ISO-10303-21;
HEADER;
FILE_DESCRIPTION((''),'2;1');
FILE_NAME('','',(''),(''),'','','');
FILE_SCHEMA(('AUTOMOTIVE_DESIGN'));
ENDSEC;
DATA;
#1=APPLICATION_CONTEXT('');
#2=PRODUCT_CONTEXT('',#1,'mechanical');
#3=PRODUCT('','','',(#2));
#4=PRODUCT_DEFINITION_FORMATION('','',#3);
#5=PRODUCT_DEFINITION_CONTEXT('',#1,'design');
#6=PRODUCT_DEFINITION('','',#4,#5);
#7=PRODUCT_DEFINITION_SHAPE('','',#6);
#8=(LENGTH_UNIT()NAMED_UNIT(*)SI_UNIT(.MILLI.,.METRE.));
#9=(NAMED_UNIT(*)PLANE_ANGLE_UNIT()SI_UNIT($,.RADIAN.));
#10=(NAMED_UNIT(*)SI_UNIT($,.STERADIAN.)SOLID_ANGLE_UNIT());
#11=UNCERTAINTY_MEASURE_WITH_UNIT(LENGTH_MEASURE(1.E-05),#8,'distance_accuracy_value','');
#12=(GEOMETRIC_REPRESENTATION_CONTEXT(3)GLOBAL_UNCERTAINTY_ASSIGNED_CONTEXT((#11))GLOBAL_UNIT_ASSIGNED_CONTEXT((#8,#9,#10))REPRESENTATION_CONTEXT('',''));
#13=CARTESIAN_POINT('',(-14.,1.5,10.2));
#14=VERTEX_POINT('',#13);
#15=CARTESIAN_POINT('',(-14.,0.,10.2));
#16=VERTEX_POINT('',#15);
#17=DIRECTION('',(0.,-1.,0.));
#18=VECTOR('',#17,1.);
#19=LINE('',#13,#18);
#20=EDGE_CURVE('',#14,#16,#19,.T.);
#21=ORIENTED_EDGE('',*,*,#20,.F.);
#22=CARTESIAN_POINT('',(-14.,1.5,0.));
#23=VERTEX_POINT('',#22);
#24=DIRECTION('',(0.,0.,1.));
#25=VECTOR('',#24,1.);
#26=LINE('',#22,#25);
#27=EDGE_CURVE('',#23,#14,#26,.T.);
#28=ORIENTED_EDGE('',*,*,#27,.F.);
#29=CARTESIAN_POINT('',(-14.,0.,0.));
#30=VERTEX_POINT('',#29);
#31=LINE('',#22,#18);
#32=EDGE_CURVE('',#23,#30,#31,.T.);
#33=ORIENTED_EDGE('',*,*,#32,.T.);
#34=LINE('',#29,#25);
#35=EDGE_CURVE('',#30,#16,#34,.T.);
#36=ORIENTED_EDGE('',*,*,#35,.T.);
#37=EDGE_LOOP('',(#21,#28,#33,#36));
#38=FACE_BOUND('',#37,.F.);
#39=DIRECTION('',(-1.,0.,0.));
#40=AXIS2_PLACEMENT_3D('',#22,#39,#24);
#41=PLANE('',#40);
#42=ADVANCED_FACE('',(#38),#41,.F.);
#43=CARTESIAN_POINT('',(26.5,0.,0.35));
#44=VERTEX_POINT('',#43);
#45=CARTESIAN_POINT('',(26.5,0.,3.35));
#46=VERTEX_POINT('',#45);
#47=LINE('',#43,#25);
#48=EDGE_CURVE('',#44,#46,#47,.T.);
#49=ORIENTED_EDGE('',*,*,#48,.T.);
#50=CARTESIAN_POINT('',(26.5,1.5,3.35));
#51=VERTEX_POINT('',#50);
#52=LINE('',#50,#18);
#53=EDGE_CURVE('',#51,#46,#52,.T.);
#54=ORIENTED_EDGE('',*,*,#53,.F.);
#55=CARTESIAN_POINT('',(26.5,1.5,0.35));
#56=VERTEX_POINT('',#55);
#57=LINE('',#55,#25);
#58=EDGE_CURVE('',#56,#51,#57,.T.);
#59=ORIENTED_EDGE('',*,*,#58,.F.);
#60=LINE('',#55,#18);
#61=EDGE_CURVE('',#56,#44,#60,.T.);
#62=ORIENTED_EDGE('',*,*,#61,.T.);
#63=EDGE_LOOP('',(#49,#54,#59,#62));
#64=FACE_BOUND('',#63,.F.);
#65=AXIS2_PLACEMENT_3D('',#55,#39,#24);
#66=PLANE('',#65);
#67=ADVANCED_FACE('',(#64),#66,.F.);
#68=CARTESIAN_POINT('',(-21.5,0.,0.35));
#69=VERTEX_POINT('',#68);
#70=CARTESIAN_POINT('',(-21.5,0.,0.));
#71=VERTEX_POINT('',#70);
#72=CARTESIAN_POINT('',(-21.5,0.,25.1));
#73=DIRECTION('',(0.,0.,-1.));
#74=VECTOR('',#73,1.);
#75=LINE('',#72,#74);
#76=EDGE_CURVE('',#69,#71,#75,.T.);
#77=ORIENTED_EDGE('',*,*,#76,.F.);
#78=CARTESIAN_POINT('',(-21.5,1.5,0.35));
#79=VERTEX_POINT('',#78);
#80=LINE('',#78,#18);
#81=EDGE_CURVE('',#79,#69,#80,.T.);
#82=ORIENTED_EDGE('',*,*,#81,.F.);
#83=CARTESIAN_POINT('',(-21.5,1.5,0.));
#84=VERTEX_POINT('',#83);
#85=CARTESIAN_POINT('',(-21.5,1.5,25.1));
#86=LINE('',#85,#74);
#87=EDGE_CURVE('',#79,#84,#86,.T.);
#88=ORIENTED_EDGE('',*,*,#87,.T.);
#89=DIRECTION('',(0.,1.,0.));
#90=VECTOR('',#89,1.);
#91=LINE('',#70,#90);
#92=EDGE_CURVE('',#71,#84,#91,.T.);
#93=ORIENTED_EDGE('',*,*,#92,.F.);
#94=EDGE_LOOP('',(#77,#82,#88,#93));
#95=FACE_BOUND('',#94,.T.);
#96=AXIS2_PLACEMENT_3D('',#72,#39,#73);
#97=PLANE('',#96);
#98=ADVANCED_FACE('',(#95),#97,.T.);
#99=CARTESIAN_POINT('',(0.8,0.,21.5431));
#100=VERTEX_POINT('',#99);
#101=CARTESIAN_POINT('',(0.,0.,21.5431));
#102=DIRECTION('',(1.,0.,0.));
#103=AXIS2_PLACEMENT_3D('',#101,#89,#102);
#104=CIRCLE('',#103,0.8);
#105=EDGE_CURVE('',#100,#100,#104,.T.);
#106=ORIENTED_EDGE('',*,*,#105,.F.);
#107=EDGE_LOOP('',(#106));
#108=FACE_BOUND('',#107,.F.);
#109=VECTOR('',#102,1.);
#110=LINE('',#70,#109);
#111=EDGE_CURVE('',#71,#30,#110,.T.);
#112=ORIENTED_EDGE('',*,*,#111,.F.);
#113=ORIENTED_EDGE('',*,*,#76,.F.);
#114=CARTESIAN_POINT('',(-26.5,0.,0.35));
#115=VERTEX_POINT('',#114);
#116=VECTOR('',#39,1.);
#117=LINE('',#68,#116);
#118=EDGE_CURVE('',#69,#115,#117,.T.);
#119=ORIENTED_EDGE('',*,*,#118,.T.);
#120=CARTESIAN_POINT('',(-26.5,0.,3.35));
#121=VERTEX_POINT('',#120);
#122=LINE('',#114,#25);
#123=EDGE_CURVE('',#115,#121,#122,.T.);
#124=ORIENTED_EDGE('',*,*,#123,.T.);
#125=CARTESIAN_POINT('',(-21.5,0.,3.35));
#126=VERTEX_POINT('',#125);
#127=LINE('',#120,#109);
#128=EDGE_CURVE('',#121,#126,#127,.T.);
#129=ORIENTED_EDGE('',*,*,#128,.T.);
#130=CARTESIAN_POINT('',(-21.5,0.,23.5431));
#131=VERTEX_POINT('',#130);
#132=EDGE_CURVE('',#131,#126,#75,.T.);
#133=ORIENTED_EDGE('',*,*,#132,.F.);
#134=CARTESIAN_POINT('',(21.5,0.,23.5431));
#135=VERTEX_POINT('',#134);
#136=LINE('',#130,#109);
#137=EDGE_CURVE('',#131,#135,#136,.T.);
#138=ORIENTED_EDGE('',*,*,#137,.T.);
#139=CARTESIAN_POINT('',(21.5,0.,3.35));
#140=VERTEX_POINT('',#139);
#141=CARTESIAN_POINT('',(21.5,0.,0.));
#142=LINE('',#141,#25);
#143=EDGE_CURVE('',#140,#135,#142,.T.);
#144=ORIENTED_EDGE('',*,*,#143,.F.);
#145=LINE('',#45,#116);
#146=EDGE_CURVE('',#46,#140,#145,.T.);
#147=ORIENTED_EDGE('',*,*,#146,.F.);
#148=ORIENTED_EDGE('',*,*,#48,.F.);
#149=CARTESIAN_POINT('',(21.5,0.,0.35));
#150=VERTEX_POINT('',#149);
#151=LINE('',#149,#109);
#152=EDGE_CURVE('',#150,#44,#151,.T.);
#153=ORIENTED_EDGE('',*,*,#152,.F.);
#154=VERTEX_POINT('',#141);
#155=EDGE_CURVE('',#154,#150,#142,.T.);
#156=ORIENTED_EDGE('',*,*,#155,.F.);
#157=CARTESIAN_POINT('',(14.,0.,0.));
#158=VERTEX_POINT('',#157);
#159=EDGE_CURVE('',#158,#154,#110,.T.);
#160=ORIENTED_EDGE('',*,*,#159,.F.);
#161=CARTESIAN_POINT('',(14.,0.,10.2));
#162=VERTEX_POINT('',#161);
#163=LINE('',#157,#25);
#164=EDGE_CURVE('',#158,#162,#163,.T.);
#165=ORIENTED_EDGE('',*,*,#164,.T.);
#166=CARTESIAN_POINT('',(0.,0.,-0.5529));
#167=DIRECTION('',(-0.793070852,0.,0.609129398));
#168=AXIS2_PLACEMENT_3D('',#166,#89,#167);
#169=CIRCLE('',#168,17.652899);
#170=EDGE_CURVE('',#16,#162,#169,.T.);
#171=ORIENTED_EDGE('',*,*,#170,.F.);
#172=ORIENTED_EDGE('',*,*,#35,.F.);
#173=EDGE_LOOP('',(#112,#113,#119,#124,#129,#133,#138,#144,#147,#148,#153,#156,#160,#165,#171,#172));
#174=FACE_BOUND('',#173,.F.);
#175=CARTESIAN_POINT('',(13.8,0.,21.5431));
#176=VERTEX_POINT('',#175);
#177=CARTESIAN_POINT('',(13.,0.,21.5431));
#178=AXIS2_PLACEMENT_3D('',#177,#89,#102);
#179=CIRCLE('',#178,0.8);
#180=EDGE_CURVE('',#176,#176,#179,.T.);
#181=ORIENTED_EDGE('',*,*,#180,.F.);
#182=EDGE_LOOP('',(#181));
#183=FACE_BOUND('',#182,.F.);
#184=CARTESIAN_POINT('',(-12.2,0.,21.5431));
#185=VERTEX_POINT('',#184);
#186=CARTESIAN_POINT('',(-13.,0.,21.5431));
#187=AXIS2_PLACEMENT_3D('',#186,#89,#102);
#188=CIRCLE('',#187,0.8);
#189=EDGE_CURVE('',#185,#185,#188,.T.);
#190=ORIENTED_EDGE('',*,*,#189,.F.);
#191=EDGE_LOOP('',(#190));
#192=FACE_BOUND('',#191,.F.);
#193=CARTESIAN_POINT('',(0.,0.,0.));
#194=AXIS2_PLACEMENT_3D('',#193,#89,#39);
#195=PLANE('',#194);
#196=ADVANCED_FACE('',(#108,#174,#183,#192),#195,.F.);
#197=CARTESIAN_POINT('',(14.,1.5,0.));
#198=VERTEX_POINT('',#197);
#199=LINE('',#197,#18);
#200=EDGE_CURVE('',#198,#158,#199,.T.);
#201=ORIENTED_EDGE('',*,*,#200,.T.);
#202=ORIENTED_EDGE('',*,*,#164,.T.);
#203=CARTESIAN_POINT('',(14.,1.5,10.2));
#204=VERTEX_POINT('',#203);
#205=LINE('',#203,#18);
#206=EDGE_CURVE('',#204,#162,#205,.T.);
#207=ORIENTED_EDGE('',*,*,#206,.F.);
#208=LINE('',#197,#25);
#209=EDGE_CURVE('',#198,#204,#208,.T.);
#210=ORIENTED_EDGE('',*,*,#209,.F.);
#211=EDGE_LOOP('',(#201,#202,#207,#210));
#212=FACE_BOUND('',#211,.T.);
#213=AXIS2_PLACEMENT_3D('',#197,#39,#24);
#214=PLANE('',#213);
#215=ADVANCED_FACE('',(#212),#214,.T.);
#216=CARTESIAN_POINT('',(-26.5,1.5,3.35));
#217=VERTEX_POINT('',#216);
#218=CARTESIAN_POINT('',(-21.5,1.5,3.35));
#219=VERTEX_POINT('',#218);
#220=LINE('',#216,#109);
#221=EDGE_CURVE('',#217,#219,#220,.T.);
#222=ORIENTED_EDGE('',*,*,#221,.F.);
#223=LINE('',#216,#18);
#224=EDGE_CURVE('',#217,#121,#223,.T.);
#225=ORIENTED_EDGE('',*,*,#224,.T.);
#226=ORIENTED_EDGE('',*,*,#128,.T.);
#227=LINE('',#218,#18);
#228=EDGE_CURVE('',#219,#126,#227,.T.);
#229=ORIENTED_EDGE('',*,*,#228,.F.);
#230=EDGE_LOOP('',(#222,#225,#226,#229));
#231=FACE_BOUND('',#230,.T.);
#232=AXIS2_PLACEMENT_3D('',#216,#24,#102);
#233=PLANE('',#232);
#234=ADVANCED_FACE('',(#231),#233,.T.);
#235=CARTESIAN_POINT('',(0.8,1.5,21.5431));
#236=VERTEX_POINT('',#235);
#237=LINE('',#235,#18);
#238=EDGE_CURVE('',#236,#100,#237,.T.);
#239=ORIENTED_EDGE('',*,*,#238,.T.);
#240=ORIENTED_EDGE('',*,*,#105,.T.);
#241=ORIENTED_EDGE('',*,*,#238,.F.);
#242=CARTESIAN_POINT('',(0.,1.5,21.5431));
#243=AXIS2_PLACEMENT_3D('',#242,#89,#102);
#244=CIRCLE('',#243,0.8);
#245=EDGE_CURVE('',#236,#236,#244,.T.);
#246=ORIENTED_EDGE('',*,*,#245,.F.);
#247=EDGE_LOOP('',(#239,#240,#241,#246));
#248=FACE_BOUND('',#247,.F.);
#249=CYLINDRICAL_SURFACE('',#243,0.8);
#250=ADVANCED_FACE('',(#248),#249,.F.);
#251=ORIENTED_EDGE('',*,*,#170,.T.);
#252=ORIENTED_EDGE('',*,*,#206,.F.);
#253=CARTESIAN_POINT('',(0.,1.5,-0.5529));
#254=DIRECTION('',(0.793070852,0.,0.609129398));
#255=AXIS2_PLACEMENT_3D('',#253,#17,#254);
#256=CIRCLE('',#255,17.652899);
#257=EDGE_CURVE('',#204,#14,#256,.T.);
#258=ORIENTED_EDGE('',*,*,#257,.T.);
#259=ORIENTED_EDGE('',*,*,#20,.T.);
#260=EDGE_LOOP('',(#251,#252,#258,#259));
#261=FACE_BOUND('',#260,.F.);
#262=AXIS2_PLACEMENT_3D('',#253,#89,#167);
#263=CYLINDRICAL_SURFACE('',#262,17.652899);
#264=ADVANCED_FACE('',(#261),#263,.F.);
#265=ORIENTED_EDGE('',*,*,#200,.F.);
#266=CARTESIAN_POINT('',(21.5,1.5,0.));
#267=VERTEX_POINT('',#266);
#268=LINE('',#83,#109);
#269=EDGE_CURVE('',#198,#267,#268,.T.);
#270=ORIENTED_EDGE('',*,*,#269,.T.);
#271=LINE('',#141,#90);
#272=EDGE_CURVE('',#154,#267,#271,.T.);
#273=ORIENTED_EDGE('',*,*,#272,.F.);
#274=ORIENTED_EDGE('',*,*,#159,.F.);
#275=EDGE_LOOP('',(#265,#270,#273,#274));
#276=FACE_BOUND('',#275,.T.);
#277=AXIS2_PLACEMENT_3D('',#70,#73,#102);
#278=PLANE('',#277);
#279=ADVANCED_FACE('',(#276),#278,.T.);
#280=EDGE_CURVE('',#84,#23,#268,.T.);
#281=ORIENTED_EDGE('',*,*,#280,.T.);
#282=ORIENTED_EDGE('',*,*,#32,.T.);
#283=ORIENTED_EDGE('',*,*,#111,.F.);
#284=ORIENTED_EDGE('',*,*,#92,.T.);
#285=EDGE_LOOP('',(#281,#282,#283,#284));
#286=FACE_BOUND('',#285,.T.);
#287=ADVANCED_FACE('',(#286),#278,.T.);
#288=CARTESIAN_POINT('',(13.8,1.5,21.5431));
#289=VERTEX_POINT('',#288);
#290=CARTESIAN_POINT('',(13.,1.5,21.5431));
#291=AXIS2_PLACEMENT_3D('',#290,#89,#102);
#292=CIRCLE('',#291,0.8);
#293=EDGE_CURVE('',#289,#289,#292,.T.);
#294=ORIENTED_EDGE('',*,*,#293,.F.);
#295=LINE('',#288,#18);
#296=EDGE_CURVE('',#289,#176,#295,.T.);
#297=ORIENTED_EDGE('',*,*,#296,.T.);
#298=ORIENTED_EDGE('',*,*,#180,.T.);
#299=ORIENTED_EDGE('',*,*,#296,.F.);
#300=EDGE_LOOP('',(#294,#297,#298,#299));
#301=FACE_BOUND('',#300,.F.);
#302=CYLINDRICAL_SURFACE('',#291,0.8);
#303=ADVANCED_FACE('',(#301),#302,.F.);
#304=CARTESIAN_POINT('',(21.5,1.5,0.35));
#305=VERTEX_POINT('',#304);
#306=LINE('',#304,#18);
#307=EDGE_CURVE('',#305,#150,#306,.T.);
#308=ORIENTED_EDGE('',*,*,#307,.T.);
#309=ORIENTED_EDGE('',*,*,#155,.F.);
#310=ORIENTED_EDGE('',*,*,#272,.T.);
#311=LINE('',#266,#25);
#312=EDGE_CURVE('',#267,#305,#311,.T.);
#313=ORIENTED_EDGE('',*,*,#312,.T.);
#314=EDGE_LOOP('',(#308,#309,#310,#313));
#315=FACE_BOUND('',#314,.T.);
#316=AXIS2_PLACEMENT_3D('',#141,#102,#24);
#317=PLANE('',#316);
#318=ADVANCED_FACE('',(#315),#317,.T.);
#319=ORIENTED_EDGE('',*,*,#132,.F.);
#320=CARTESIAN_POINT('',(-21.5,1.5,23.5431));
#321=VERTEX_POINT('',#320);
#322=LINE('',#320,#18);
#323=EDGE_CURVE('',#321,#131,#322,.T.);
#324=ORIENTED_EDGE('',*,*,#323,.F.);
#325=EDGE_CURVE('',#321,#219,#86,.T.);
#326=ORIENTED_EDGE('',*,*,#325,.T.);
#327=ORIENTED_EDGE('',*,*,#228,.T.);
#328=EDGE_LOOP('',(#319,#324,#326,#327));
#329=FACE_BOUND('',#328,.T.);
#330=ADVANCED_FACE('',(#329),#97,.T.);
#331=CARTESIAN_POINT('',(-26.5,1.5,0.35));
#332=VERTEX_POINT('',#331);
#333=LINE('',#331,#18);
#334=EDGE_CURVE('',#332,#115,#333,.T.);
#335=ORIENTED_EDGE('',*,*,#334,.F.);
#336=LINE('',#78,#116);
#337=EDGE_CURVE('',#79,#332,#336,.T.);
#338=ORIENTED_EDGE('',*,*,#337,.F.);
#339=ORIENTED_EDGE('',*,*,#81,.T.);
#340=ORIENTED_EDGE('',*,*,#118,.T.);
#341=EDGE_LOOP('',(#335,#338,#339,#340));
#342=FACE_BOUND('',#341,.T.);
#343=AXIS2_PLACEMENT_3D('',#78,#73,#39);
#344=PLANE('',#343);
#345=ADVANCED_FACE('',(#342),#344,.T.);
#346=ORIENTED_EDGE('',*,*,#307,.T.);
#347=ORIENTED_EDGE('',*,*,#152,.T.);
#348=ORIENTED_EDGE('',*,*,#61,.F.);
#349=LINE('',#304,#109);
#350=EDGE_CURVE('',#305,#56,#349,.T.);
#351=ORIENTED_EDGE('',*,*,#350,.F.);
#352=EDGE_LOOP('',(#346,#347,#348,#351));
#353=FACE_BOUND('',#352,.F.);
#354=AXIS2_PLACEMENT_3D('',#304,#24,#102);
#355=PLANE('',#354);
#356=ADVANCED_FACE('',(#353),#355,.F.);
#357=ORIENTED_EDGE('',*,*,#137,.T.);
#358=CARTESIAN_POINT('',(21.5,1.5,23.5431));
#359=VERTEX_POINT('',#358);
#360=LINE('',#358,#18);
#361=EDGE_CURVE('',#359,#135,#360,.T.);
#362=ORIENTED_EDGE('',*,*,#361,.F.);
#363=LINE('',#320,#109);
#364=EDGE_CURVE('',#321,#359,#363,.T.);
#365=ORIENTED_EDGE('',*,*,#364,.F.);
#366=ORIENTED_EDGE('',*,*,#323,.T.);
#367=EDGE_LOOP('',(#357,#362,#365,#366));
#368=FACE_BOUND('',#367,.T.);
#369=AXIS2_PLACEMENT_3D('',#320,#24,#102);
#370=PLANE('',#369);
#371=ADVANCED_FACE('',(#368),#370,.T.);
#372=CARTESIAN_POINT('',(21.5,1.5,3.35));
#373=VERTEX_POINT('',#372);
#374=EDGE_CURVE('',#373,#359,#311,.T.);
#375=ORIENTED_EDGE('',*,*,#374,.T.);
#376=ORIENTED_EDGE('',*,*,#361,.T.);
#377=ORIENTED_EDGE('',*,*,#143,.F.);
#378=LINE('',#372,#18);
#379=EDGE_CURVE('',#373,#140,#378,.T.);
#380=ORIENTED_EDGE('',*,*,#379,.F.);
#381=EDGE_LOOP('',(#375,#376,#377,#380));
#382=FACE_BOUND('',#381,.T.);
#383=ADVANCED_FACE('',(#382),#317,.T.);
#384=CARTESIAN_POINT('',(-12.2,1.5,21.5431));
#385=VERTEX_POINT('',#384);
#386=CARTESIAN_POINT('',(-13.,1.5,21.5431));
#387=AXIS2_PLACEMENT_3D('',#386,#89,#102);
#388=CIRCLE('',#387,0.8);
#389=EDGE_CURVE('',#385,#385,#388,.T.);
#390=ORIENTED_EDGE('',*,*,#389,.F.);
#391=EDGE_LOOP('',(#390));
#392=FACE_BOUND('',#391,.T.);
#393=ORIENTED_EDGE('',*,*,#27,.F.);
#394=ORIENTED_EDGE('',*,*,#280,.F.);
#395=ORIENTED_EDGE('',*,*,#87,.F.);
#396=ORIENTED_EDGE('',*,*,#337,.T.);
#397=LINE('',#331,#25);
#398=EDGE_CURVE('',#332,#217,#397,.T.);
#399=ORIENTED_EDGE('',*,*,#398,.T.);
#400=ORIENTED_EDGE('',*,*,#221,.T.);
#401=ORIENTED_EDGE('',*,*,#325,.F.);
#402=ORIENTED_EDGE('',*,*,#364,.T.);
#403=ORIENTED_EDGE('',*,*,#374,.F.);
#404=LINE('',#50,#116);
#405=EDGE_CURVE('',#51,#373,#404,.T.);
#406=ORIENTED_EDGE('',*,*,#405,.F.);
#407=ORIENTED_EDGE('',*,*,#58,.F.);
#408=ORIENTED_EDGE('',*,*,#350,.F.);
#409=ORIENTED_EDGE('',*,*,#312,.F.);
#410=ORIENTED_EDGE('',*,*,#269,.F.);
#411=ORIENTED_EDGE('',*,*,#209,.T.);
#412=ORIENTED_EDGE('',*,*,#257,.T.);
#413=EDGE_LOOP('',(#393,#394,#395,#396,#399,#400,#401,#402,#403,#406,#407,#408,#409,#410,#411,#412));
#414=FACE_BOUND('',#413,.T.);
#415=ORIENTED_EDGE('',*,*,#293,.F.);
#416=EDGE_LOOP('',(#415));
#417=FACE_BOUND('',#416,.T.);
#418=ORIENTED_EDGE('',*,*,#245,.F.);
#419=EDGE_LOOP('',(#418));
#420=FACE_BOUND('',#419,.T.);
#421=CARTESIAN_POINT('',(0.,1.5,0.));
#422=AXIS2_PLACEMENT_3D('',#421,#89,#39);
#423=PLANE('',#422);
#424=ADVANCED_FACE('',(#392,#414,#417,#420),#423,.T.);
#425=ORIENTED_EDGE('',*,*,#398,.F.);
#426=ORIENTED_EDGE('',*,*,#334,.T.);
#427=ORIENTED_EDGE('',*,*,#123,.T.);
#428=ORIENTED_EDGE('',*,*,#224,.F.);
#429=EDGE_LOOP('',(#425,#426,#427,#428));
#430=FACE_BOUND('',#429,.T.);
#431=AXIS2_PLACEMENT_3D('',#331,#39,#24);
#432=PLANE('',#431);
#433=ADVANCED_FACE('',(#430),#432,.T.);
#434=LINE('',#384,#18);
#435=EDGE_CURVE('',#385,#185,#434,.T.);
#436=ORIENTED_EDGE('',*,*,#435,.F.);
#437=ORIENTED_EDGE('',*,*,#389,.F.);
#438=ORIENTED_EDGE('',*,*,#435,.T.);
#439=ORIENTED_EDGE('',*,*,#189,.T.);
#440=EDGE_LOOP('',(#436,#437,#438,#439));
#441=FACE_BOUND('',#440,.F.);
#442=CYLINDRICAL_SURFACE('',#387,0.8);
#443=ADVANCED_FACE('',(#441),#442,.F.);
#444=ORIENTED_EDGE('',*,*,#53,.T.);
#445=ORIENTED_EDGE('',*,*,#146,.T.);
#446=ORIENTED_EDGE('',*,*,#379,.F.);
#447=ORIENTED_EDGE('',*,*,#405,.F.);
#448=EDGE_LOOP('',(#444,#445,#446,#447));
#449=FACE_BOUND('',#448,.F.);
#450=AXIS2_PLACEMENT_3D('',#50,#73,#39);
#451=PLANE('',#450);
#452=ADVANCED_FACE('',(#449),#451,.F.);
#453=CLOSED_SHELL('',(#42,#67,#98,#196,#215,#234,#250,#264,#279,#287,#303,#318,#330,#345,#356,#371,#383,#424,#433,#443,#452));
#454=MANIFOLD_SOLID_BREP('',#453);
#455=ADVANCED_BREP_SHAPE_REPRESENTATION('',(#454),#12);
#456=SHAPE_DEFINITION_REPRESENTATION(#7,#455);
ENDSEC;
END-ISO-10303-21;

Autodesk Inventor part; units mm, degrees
ref_plane "YZ Plane" through (0, 0, 0) normal (1, 0, 0) x (0, 1, 0)
ref_plane "XZ Plane" through (0, 0, 0) normal (0, 1, 0) x (-1, 0, 0)
ref_plane "XY Plane" through (0, 0, 0) normal (0, 0, 1) x (1, 0, 0)
sketch "スケッチ8" plane through (0, 1.5, 0) normal (0, 1, 0) x (1, 0, 0)
  line L0 (-21.5, -23.5431) -> (-21.5, 0)
  line L1 (-21.5, -0.35) -> (-26.5, -0.35)
  line L2 (-26.5, -0.35) -> (-26.5, -3.35)
  line L3 (-26.5, -3.35) -> (-21.5, -3.35)
  line L4 (-21.5, -3.35) -> (-21.5, -0.35)
  line L5 (21.5, 0) -> (21.5, -23.5431)
  line L6 (21.5, -0.35) -> (26.5, -0.35)
  line L7 (26.5, -0.35) -> (26.5, -3.35)
  line L8 (26.5, -3.35) -> (21.5, -3.35)
  line L9 (21.5, -3.35) -> (21.5, -0.35)
  line L10 (-21.5, 0) -> (-14, 0)
  point P0 (0, 0)
  point P1 (-26.5, -1.85)
  dimension "d28" = 5
  dimension "d29" = 3
  dimension "d30" = 1.85
sketch "スケッチ1" plane through (0, 0, 0) normal (0, 1, 0) x (-1, 0, 0)
  line L0 (21.5, 0) -> (-21.5, 0)
  line L1 (-21.5, 0) -> (-21.5, 25.1)
  line L2 (-21.5, 25.1) -> (21.5, 25.1)
  line L3 (21.5, 25.1) -> (21.5, 0)
  point P0 (0, 0)
  point P1 (0, 0)
  dimension "d0" = 25.1
  dimension "d1" = 43
extrude "プレート1" add sketch "スケッチ1" along normal blind 1.5
sketch "スケッチ3" plane through (0, 1.5, 0) normal (0, 1, 0) x (1, 0, 0)
  line L0 (21.5, 0) -> (-21.5, 0) projected
  line L1 (-20, 0) -> (-20, -17.1)
  line L2 (20, 0) -> (20, -17.1)
  line L3 (-21.5, -25.1) -> (-21.5, 0) projected
  line L4 (21.5, 0) -> (21.5, -25.1) projected
  line L5 (-20, -17.1) -> (20, -17.1)
  line L6 (-20, 0) -> (-14, 0)
  line L7 (-14, 0) -> (-14, -10.2)
  line L8 (-14, -10.2) -> (-20, -10.2)
  line L9 (-20, -10.2) -> (-20, 0)
  line L10 (20, 0) -> (14, 0)
  line L11 (14, 0) -> (14, -10.2)
  line L12 (14, -10.2) -> (20, -10.2)
  line L13 (20, -10.2) -> (20, 0)
  line L14 (-20, -10.2) -> (-21.5, -10.2)
  line L15 (20, -10.2) -> (21.5, -10.2)
  line L16 (21.5, -25.1) -> (-21.5, -25.1) projected
  arc A0 (-14, -10.2) -> (14, -10.2) centre (0, 0.5529) ccw
  point P0 (0, 0)
  point P1 (20, -10.2)
  point P2 (14, 0)
  point P3 (-14, 0)
  dimension "d5" = 1.5
  dimension "d6" = 1.5
  dimension "d7" = 6
  dimension "d8" = 10.2
  dimension "d9" = 8
extrude "押し出し2" cut sketch "スケッチ3" against normal through all contours L11 A0 L7 L0
sketch "スケッチ4" plane through (-21.5, 0, 25.1) normal (-1, 0, 0) x (0, 0, 1)
  line L0 (-0.5569, 2.6) -> (-0.5569, 0)
  line L1 (0, 0) -> (-25.1, 0) projected
  line L2 (-25.1, 0) -> (0, 0) projected
  line L3 (0, 0) -> (0, 1.5) projected
  line L4 (0, 1.5) -> (-25.1, 1.5) projected
  line L5 (-25.1, 0) -> (-25.1, 1.5) projected
  point P0 (-14.9, 0)
  point P1 (0, 0)
  point P2 (-0.5569, 1.5)
extrude "押し出し3" cut sketch "スケッチ4" against normal through all contours L4 L3 L1 L0
sketch "スケッチ5" plane through (0, 1.5, 0) normal (0, 1, 0) x (1, 0, 0)
  circle A0 centre (0, -21.5431) radius 0.8 projected
  circle A1 centre (-13, -21.5431) radius 0.8 projected
  circle A2 centre (13, -21.5431) radius 0.8 projected
  line L0 (-21.5, -24.5431) -> (-21.5, 0) projected
  line L1 (-21.5, -23.5431) -> (21.5, -23.5431)
  line L2 (21.5, -24.5431) -> (-21.5, -24.5431) projected
  line L3 (21.5, 0) -> (21.5, -24.5431) projected
  point P0 (0, 0)
  point P1 (-21.5, -10.2)
  point P2 (21.5, -10.2)
  dimension "d16" = 1
extrude "切り取り1" cut sketch "スケッチ5" against normal blind 1.5
sheet face with bend "面3" sketch "スケッチ8" thickness 1.5 toward (0, -1, 0) bend radius 1.5
bend "曲げ2"
equation "\"d6\" = d5"
equation "\"d14\" = Thickness"
equation "\"d2\" = Thickness"
equation "\"d31\" = BendRadius"
equation "\"d32\" = BendReliefWidth"
equation "\"d34\" = MinimumRemnant"
equation "\"d33\" = BendReliefDepth"
equation "\"d35\" = TransitionRadius"
equation "\"BendRadius\" = Thickness"
equation "\"BendReliefWidth\" = Thickness"
equation "\"BendReliefDepth\" = 0.5 * Thickness"
equation "\"CornerReliefSize\" = 4 * Thickness"
equation "\"MinimumRemnant\" = 2 * Thickness"
equation "\"TransitionRadius\" = BendRadius"
equation "\"JacobiRadiusSize\" = BendRadius"
equation "\"GapSize\" = Thickness"
equation "\"Thickness\" = 1.5"
properties part number "chest_cover_base" material "アルミニウム 6061"
